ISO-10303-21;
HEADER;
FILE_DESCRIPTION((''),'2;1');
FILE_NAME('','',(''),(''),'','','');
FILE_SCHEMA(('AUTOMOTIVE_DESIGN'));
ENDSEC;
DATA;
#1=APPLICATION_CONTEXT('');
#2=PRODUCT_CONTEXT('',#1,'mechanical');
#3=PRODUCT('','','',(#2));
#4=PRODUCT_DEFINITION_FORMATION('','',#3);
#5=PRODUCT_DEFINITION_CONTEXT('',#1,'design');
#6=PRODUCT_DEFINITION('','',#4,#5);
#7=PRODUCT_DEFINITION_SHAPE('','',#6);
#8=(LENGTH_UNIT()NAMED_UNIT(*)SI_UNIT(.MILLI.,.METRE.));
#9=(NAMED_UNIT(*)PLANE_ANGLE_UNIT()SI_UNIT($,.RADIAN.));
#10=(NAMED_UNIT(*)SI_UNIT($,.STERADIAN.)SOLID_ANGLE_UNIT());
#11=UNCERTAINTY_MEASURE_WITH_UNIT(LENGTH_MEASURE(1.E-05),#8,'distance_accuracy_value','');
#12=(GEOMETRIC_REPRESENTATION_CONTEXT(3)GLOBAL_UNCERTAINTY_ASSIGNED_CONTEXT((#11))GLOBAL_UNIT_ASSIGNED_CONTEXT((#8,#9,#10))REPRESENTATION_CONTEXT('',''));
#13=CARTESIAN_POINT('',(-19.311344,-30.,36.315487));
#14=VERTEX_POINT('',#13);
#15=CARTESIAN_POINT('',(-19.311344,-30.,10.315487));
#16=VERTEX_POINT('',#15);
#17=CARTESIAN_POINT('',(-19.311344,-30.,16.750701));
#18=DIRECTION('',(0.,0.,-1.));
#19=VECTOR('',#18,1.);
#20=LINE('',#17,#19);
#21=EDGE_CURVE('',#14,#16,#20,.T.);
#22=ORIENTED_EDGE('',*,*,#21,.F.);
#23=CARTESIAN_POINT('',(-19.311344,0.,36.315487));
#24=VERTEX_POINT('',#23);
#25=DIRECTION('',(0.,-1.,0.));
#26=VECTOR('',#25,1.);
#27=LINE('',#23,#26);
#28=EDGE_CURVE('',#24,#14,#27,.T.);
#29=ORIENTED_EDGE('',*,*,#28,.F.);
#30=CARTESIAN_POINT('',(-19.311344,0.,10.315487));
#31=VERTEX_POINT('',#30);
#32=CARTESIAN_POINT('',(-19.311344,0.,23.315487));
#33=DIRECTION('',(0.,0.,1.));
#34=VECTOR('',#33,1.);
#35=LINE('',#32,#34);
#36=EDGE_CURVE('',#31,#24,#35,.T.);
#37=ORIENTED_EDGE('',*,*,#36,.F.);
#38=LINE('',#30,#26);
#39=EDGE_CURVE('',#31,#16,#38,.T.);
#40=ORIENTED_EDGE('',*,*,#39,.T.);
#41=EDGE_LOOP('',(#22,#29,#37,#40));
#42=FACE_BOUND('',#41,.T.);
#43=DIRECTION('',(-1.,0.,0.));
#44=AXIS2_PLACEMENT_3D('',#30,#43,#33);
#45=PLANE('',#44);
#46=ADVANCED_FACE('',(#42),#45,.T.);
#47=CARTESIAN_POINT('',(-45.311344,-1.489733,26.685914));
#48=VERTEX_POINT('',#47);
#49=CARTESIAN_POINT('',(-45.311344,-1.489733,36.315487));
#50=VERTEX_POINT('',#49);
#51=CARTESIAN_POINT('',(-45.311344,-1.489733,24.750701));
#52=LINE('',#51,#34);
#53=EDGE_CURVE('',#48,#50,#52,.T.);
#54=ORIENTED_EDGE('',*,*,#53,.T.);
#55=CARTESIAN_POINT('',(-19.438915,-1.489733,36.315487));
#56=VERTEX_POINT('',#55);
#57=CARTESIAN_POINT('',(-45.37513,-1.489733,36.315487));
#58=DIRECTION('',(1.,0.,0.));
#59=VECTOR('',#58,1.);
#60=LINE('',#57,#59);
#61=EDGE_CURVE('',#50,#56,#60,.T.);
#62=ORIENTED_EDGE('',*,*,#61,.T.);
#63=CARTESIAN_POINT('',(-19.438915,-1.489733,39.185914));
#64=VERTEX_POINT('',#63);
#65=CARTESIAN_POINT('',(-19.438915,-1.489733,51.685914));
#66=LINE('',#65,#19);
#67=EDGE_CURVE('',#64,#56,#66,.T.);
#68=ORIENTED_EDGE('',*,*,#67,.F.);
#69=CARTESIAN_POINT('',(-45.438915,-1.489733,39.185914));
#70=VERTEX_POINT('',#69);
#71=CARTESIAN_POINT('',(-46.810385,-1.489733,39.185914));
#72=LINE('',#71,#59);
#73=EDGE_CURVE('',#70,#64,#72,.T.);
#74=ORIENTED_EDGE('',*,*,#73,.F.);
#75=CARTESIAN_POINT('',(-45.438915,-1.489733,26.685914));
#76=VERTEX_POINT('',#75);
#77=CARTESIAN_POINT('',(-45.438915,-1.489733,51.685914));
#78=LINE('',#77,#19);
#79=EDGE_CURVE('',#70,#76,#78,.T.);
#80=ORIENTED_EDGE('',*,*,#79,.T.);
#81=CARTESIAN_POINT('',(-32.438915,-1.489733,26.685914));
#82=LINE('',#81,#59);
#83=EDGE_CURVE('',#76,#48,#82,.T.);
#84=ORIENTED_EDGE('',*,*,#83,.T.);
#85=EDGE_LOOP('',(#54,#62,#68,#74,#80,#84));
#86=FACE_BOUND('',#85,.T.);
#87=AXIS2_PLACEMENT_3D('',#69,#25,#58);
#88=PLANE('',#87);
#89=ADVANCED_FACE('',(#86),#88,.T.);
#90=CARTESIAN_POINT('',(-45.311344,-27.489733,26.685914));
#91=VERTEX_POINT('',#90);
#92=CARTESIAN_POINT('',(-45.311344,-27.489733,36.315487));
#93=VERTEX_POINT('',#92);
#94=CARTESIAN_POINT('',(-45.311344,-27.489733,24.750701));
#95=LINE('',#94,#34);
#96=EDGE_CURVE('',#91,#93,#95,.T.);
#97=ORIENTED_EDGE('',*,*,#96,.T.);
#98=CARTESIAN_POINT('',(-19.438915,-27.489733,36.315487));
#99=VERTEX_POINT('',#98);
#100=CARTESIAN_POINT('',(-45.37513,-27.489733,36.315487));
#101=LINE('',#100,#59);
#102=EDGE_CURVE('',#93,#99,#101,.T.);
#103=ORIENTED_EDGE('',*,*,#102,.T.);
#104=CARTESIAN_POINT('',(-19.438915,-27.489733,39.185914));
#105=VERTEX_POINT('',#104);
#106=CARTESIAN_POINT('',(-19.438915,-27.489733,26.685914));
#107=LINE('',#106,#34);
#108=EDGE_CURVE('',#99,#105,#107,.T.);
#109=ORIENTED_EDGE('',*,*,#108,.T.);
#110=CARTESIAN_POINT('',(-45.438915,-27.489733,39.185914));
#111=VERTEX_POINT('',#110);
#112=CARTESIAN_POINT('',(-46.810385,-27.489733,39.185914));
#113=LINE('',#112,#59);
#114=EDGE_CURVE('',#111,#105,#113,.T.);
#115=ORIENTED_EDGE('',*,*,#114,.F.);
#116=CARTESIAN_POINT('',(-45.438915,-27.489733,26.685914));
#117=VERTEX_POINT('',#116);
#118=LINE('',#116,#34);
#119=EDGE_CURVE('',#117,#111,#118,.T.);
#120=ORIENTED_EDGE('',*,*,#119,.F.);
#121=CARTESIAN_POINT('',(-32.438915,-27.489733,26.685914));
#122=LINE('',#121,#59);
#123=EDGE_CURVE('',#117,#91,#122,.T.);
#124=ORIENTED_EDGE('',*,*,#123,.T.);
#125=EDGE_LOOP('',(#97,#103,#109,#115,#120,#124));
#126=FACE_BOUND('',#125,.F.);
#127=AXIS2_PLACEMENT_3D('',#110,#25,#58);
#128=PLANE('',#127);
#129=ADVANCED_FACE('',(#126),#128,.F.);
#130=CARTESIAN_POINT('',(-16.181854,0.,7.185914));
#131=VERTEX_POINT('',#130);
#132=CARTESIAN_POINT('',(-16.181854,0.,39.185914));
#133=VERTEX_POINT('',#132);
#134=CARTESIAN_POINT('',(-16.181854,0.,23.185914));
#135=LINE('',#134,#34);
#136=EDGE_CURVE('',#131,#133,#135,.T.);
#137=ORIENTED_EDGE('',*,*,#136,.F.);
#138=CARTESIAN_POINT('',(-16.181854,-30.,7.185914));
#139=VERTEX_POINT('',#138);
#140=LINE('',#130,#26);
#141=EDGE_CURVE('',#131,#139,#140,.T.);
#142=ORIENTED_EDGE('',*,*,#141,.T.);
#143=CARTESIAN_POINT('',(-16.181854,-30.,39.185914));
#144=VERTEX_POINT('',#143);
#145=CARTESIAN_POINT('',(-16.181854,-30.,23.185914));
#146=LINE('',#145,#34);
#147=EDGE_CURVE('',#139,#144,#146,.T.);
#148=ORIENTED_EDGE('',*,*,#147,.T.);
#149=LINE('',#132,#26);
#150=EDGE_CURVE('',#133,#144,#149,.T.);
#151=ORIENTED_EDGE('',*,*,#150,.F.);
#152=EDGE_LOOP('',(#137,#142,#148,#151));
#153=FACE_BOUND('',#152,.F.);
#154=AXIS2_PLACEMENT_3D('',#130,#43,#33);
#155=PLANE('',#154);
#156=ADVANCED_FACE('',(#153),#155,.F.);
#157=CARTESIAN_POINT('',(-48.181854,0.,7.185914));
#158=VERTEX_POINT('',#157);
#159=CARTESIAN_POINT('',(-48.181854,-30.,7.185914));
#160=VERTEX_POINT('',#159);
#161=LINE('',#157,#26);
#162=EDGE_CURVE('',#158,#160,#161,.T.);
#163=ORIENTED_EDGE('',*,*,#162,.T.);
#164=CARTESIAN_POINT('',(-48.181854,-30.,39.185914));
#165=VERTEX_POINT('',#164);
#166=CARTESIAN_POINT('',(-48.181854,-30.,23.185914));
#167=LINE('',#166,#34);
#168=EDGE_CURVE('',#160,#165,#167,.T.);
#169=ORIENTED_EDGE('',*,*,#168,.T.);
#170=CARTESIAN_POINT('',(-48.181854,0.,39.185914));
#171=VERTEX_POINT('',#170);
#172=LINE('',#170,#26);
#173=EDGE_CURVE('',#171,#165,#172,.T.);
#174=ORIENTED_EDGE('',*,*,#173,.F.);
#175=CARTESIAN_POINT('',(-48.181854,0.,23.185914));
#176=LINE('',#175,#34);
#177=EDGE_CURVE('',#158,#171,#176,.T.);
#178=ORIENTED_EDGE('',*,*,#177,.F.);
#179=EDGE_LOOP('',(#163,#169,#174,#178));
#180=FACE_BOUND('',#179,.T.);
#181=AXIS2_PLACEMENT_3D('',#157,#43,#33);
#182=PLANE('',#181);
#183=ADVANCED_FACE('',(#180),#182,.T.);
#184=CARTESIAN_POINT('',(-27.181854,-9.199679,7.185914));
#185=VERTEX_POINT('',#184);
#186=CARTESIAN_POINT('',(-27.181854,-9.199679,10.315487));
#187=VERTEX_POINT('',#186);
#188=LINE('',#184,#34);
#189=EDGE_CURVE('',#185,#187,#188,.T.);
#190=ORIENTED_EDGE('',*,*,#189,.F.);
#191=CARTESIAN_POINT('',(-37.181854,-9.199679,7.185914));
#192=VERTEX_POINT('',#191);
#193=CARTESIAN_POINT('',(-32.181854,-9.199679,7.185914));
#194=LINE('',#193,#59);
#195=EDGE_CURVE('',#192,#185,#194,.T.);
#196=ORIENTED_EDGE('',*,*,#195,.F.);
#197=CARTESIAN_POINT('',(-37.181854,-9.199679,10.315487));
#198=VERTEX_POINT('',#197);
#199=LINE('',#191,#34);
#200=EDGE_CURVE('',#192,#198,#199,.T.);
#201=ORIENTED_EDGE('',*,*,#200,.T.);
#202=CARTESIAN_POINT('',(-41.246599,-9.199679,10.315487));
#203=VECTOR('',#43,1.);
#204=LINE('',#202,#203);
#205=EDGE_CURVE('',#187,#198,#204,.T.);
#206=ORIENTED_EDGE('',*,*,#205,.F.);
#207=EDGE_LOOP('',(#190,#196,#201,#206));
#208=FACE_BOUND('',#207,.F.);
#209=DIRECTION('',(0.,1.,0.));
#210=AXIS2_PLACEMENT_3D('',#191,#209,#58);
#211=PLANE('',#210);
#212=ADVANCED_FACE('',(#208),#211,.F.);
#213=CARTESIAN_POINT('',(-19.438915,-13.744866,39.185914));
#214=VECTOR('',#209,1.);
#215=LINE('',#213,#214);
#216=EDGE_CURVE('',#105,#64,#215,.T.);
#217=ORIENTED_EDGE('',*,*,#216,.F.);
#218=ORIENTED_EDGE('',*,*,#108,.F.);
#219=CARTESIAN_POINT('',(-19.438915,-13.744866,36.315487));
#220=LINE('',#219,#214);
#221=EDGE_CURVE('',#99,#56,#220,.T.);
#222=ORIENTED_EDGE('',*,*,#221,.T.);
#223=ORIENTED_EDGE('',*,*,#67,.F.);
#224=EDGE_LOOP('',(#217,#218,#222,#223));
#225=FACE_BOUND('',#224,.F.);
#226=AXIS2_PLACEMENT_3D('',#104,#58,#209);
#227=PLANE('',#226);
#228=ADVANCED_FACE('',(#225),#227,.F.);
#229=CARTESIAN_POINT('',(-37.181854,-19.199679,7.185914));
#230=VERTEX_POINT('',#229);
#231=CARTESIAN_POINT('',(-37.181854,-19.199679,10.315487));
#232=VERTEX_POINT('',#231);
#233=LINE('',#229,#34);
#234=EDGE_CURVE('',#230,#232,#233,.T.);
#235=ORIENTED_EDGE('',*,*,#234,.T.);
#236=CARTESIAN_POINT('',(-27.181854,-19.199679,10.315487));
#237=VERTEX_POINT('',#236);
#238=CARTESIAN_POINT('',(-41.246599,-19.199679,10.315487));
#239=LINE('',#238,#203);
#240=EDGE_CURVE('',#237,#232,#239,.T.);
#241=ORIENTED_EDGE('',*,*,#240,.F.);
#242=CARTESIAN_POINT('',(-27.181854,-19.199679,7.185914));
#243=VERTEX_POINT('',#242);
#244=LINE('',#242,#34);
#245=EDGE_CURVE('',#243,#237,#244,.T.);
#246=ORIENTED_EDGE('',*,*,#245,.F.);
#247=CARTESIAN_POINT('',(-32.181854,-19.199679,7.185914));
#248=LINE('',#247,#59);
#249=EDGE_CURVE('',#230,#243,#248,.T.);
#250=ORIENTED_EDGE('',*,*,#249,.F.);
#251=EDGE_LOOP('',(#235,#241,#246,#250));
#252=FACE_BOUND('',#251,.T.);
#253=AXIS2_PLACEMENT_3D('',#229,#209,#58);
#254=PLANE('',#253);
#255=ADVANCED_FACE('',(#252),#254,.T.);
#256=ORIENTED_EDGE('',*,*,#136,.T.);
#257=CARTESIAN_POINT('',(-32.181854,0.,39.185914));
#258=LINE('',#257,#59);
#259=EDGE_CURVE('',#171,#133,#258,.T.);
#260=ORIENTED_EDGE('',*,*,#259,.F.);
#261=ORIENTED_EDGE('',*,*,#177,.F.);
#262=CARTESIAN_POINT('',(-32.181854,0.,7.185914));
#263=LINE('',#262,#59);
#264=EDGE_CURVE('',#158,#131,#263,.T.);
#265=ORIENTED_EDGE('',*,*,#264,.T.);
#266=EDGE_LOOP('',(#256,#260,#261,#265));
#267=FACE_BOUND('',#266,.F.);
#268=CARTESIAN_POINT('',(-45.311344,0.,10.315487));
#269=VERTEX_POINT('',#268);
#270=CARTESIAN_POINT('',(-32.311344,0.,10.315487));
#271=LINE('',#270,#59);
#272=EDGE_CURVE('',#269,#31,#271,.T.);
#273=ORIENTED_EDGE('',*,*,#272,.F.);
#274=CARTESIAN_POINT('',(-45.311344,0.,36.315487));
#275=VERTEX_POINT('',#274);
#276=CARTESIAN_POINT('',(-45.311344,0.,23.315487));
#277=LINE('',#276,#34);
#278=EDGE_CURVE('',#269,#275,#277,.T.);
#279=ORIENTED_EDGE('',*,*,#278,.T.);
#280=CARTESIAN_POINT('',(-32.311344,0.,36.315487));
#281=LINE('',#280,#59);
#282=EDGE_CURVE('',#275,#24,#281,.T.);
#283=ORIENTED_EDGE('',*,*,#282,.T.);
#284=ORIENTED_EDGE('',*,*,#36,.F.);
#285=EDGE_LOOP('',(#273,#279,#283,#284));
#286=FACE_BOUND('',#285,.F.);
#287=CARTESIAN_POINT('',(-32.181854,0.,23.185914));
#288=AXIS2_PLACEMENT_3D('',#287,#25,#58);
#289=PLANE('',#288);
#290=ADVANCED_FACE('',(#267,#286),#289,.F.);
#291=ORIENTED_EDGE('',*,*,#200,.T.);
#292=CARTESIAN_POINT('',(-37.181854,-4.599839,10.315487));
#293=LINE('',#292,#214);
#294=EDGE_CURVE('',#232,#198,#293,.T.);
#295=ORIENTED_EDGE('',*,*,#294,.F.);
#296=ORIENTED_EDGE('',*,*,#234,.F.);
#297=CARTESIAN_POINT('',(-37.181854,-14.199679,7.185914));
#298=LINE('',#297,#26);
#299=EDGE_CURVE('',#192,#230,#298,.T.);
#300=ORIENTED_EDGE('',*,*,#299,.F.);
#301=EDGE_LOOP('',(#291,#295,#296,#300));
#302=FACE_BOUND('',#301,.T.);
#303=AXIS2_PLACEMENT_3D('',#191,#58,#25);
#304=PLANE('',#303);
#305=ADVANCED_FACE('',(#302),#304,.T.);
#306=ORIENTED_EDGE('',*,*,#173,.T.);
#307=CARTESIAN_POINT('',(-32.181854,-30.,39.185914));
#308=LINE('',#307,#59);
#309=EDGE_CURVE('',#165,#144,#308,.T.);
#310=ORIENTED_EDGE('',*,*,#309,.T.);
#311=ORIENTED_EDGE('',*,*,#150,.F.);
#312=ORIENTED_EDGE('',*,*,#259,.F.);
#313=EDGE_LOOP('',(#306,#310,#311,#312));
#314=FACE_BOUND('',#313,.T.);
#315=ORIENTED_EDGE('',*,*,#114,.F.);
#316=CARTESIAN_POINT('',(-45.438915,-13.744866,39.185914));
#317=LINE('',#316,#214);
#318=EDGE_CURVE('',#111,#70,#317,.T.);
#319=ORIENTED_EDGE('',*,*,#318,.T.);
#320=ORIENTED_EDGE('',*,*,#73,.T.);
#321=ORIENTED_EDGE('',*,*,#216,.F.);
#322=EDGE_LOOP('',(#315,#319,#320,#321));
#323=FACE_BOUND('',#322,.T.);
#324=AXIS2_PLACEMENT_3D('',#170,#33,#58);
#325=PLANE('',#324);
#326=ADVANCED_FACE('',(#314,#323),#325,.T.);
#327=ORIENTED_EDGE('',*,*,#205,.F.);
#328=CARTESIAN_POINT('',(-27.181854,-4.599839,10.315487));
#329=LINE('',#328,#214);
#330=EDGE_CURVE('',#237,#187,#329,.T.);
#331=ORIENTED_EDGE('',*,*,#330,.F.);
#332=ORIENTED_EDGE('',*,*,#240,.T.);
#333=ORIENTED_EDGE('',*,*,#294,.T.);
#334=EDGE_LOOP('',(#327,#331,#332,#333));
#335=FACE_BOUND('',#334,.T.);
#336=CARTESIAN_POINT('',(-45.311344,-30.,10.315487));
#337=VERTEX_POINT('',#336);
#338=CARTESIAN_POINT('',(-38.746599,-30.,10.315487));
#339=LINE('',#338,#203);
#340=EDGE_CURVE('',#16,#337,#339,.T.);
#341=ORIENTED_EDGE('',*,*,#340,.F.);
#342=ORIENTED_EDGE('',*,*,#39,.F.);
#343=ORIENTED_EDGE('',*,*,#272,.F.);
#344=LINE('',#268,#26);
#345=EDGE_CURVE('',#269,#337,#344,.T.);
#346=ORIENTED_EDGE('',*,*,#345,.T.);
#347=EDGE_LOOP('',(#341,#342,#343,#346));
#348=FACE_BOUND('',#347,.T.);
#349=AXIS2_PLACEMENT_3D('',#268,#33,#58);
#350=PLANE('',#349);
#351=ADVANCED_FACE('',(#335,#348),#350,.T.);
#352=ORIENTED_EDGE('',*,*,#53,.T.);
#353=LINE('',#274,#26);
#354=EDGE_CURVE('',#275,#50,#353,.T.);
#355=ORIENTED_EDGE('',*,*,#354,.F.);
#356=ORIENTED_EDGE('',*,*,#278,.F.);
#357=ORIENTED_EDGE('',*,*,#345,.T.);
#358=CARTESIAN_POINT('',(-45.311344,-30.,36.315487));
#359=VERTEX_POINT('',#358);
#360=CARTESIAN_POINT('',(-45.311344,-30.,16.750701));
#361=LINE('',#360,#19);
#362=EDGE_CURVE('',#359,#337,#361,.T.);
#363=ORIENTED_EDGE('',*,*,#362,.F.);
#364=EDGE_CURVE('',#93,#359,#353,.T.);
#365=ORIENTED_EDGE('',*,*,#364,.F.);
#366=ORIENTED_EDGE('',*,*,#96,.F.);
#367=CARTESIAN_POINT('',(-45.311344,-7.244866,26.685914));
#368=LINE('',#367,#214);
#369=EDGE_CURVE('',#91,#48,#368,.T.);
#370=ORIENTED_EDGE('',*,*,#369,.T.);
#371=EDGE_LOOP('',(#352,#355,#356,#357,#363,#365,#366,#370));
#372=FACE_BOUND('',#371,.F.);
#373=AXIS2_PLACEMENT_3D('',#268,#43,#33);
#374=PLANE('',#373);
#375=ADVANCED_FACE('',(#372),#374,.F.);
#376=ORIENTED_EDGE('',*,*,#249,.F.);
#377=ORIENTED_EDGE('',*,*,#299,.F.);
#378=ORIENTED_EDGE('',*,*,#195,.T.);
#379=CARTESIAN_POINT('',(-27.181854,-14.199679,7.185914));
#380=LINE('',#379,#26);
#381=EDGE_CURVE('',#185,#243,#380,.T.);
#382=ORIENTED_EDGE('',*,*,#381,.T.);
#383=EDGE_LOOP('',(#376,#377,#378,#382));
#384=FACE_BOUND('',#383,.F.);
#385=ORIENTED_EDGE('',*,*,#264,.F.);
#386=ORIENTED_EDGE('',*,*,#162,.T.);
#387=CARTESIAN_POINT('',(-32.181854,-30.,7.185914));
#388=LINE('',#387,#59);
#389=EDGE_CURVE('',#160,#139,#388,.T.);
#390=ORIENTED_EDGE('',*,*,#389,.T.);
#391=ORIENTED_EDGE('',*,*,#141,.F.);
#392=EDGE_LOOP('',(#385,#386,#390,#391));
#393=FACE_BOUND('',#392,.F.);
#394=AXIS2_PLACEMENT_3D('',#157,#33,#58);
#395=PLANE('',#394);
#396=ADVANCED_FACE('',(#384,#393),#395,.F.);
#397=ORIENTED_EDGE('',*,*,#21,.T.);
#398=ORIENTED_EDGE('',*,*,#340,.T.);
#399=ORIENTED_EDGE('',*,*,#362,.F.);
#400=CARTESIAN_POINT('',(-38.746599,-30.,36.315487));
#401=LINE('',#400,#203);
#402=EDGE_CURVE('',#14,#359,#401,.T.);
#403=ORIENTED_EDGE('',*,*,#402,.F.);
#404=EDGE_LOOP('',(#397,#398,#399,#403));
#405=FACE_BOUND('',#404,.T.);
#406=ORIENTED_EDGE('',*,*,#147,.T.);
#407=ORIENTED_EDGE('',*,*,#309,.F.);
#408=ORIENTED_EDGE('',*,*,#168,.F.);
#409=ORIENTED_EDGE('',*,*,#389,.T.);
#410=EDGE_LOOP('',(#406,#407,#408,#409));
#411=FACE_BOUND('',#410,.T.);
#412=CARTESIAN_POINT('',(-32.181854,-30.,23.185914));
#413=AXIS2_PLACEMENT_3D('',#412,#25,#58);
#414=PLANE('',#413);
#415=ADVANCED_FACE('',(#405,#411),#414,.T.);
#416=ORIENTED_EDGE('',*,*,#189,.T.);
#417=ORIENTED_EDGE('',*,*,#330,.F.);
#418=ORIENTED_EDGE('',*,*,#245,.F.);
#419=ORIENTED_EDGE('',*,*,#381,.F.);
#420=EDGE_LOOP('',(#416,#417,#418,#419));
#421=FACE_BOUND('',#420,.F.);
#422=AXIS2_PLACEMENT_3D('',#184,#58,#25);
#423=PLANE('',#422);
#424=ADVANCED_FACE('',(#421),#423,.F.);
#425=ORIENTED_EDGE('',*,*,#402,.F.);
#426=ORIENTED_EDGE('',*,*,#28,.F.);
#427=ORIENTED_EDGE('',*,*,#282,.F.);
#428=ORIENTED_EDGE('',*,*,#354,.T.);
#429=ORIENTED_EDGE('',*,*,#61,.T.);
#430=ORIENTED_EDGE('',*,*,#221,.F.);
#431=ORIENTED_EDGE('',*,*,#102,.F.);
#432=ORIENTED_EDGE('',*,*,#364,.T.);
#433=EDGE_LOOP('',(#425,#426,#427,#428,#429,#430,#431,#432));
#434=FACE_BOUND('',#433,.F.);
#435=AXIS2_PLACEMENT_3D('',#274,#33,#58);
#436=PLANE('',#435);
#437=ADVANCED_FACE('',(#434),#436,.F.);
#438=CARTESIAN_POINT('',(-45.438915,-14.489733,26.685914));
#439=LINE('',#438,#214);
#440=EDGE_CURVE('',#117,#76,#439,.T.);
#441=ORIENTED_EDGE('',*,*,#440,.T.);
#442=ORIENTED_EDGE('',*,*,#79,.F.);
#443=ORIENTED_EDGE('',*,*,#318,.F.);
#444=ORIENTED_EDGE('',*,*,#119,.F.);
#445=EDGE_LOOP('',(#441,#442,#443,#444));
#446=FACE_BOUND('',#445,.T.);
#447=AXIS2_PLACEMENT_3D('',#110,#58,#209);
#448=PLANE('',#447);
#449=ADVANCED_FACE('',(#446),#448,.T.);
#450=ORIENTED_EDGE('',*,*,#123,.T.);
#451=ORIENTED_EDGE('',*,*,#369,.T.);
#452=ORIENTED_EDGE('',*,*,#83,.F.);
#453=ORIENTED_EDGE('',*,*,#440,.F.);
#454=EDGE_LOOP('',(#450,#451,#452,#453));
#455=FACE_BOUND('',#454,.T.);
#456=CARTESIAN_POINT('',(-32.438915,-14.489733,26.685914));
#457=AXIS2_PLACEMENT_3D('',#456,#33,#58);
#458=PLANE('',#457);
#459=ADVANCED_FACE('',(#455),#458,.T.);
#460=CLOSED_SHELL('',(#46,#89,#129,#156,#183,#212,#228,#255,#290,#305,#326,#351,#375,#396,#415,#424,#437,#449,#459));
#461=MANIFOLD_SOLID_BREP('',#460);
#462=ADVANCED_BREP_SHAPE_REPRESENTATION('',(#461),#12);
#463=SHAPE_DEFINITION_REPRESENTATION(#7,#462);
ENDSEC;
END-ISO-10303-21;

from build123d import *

# Parameters (mm, degrees)
F0_W     = 32
F0_H     = 32
F1_DEPTH = 30
F2_W     = 26
F2_H     = 26
F3_DEPTH = 30.001
F4_W     = 26
F4_H     = 26
F5_DEPTH = 12.5
F6_W     = 10
F6_H     = 10
F7_DEPTH = 32.001


# Not quite as in the source:
# - a feature names something its author has since deleted; it is built from what else it names


with BuildPart() as f1:
    # F0 (on Front) → F1 (new body)
    with BuildSketch(Plane.XZ):
        with Locations((-32.1818544654, 23.1859142184)):
            Rectangle(F0_W, F0_H)
    extrude(amount=F1_DEPTH)

    # F2 (on Front) → F3 (cut, through all)
    with BuildSketch(Plane.XZ):
        with Locations((-32.3113440342, 23.315487102)):
            Rectangle(F2_W, F2_H)
    extrude(amount=F3_DEPTH, mode=Mode.SUBTRACT)

    # F4 (on face) → F5 (cut, symmetric)
    with BuildSketch(Plane.XY.offset(39.1859142184)):
        with Locations((-32.4389154911, -14.4897329509)):
            Rectangle(F4_W, F4_H)
    extrude(amount=F5_DEPTH, both=True, mode=Mode.SUBTRACT)

    # F6 (on face) → F7 (cut, through all)
    with BuildSketch(Plane(origin=(0, 0, 7.1859142184), x_dir=(1, 0, 0), z_dir=(0, 0, -1))):
        with Locations((-32.1818544654, 14.1996787861)):
            Rectangle(F6_W, F6_H)
    extrude(amount=-F7_DEPTH, mode=Mode.SUBTRACT)


solid = f1.part
